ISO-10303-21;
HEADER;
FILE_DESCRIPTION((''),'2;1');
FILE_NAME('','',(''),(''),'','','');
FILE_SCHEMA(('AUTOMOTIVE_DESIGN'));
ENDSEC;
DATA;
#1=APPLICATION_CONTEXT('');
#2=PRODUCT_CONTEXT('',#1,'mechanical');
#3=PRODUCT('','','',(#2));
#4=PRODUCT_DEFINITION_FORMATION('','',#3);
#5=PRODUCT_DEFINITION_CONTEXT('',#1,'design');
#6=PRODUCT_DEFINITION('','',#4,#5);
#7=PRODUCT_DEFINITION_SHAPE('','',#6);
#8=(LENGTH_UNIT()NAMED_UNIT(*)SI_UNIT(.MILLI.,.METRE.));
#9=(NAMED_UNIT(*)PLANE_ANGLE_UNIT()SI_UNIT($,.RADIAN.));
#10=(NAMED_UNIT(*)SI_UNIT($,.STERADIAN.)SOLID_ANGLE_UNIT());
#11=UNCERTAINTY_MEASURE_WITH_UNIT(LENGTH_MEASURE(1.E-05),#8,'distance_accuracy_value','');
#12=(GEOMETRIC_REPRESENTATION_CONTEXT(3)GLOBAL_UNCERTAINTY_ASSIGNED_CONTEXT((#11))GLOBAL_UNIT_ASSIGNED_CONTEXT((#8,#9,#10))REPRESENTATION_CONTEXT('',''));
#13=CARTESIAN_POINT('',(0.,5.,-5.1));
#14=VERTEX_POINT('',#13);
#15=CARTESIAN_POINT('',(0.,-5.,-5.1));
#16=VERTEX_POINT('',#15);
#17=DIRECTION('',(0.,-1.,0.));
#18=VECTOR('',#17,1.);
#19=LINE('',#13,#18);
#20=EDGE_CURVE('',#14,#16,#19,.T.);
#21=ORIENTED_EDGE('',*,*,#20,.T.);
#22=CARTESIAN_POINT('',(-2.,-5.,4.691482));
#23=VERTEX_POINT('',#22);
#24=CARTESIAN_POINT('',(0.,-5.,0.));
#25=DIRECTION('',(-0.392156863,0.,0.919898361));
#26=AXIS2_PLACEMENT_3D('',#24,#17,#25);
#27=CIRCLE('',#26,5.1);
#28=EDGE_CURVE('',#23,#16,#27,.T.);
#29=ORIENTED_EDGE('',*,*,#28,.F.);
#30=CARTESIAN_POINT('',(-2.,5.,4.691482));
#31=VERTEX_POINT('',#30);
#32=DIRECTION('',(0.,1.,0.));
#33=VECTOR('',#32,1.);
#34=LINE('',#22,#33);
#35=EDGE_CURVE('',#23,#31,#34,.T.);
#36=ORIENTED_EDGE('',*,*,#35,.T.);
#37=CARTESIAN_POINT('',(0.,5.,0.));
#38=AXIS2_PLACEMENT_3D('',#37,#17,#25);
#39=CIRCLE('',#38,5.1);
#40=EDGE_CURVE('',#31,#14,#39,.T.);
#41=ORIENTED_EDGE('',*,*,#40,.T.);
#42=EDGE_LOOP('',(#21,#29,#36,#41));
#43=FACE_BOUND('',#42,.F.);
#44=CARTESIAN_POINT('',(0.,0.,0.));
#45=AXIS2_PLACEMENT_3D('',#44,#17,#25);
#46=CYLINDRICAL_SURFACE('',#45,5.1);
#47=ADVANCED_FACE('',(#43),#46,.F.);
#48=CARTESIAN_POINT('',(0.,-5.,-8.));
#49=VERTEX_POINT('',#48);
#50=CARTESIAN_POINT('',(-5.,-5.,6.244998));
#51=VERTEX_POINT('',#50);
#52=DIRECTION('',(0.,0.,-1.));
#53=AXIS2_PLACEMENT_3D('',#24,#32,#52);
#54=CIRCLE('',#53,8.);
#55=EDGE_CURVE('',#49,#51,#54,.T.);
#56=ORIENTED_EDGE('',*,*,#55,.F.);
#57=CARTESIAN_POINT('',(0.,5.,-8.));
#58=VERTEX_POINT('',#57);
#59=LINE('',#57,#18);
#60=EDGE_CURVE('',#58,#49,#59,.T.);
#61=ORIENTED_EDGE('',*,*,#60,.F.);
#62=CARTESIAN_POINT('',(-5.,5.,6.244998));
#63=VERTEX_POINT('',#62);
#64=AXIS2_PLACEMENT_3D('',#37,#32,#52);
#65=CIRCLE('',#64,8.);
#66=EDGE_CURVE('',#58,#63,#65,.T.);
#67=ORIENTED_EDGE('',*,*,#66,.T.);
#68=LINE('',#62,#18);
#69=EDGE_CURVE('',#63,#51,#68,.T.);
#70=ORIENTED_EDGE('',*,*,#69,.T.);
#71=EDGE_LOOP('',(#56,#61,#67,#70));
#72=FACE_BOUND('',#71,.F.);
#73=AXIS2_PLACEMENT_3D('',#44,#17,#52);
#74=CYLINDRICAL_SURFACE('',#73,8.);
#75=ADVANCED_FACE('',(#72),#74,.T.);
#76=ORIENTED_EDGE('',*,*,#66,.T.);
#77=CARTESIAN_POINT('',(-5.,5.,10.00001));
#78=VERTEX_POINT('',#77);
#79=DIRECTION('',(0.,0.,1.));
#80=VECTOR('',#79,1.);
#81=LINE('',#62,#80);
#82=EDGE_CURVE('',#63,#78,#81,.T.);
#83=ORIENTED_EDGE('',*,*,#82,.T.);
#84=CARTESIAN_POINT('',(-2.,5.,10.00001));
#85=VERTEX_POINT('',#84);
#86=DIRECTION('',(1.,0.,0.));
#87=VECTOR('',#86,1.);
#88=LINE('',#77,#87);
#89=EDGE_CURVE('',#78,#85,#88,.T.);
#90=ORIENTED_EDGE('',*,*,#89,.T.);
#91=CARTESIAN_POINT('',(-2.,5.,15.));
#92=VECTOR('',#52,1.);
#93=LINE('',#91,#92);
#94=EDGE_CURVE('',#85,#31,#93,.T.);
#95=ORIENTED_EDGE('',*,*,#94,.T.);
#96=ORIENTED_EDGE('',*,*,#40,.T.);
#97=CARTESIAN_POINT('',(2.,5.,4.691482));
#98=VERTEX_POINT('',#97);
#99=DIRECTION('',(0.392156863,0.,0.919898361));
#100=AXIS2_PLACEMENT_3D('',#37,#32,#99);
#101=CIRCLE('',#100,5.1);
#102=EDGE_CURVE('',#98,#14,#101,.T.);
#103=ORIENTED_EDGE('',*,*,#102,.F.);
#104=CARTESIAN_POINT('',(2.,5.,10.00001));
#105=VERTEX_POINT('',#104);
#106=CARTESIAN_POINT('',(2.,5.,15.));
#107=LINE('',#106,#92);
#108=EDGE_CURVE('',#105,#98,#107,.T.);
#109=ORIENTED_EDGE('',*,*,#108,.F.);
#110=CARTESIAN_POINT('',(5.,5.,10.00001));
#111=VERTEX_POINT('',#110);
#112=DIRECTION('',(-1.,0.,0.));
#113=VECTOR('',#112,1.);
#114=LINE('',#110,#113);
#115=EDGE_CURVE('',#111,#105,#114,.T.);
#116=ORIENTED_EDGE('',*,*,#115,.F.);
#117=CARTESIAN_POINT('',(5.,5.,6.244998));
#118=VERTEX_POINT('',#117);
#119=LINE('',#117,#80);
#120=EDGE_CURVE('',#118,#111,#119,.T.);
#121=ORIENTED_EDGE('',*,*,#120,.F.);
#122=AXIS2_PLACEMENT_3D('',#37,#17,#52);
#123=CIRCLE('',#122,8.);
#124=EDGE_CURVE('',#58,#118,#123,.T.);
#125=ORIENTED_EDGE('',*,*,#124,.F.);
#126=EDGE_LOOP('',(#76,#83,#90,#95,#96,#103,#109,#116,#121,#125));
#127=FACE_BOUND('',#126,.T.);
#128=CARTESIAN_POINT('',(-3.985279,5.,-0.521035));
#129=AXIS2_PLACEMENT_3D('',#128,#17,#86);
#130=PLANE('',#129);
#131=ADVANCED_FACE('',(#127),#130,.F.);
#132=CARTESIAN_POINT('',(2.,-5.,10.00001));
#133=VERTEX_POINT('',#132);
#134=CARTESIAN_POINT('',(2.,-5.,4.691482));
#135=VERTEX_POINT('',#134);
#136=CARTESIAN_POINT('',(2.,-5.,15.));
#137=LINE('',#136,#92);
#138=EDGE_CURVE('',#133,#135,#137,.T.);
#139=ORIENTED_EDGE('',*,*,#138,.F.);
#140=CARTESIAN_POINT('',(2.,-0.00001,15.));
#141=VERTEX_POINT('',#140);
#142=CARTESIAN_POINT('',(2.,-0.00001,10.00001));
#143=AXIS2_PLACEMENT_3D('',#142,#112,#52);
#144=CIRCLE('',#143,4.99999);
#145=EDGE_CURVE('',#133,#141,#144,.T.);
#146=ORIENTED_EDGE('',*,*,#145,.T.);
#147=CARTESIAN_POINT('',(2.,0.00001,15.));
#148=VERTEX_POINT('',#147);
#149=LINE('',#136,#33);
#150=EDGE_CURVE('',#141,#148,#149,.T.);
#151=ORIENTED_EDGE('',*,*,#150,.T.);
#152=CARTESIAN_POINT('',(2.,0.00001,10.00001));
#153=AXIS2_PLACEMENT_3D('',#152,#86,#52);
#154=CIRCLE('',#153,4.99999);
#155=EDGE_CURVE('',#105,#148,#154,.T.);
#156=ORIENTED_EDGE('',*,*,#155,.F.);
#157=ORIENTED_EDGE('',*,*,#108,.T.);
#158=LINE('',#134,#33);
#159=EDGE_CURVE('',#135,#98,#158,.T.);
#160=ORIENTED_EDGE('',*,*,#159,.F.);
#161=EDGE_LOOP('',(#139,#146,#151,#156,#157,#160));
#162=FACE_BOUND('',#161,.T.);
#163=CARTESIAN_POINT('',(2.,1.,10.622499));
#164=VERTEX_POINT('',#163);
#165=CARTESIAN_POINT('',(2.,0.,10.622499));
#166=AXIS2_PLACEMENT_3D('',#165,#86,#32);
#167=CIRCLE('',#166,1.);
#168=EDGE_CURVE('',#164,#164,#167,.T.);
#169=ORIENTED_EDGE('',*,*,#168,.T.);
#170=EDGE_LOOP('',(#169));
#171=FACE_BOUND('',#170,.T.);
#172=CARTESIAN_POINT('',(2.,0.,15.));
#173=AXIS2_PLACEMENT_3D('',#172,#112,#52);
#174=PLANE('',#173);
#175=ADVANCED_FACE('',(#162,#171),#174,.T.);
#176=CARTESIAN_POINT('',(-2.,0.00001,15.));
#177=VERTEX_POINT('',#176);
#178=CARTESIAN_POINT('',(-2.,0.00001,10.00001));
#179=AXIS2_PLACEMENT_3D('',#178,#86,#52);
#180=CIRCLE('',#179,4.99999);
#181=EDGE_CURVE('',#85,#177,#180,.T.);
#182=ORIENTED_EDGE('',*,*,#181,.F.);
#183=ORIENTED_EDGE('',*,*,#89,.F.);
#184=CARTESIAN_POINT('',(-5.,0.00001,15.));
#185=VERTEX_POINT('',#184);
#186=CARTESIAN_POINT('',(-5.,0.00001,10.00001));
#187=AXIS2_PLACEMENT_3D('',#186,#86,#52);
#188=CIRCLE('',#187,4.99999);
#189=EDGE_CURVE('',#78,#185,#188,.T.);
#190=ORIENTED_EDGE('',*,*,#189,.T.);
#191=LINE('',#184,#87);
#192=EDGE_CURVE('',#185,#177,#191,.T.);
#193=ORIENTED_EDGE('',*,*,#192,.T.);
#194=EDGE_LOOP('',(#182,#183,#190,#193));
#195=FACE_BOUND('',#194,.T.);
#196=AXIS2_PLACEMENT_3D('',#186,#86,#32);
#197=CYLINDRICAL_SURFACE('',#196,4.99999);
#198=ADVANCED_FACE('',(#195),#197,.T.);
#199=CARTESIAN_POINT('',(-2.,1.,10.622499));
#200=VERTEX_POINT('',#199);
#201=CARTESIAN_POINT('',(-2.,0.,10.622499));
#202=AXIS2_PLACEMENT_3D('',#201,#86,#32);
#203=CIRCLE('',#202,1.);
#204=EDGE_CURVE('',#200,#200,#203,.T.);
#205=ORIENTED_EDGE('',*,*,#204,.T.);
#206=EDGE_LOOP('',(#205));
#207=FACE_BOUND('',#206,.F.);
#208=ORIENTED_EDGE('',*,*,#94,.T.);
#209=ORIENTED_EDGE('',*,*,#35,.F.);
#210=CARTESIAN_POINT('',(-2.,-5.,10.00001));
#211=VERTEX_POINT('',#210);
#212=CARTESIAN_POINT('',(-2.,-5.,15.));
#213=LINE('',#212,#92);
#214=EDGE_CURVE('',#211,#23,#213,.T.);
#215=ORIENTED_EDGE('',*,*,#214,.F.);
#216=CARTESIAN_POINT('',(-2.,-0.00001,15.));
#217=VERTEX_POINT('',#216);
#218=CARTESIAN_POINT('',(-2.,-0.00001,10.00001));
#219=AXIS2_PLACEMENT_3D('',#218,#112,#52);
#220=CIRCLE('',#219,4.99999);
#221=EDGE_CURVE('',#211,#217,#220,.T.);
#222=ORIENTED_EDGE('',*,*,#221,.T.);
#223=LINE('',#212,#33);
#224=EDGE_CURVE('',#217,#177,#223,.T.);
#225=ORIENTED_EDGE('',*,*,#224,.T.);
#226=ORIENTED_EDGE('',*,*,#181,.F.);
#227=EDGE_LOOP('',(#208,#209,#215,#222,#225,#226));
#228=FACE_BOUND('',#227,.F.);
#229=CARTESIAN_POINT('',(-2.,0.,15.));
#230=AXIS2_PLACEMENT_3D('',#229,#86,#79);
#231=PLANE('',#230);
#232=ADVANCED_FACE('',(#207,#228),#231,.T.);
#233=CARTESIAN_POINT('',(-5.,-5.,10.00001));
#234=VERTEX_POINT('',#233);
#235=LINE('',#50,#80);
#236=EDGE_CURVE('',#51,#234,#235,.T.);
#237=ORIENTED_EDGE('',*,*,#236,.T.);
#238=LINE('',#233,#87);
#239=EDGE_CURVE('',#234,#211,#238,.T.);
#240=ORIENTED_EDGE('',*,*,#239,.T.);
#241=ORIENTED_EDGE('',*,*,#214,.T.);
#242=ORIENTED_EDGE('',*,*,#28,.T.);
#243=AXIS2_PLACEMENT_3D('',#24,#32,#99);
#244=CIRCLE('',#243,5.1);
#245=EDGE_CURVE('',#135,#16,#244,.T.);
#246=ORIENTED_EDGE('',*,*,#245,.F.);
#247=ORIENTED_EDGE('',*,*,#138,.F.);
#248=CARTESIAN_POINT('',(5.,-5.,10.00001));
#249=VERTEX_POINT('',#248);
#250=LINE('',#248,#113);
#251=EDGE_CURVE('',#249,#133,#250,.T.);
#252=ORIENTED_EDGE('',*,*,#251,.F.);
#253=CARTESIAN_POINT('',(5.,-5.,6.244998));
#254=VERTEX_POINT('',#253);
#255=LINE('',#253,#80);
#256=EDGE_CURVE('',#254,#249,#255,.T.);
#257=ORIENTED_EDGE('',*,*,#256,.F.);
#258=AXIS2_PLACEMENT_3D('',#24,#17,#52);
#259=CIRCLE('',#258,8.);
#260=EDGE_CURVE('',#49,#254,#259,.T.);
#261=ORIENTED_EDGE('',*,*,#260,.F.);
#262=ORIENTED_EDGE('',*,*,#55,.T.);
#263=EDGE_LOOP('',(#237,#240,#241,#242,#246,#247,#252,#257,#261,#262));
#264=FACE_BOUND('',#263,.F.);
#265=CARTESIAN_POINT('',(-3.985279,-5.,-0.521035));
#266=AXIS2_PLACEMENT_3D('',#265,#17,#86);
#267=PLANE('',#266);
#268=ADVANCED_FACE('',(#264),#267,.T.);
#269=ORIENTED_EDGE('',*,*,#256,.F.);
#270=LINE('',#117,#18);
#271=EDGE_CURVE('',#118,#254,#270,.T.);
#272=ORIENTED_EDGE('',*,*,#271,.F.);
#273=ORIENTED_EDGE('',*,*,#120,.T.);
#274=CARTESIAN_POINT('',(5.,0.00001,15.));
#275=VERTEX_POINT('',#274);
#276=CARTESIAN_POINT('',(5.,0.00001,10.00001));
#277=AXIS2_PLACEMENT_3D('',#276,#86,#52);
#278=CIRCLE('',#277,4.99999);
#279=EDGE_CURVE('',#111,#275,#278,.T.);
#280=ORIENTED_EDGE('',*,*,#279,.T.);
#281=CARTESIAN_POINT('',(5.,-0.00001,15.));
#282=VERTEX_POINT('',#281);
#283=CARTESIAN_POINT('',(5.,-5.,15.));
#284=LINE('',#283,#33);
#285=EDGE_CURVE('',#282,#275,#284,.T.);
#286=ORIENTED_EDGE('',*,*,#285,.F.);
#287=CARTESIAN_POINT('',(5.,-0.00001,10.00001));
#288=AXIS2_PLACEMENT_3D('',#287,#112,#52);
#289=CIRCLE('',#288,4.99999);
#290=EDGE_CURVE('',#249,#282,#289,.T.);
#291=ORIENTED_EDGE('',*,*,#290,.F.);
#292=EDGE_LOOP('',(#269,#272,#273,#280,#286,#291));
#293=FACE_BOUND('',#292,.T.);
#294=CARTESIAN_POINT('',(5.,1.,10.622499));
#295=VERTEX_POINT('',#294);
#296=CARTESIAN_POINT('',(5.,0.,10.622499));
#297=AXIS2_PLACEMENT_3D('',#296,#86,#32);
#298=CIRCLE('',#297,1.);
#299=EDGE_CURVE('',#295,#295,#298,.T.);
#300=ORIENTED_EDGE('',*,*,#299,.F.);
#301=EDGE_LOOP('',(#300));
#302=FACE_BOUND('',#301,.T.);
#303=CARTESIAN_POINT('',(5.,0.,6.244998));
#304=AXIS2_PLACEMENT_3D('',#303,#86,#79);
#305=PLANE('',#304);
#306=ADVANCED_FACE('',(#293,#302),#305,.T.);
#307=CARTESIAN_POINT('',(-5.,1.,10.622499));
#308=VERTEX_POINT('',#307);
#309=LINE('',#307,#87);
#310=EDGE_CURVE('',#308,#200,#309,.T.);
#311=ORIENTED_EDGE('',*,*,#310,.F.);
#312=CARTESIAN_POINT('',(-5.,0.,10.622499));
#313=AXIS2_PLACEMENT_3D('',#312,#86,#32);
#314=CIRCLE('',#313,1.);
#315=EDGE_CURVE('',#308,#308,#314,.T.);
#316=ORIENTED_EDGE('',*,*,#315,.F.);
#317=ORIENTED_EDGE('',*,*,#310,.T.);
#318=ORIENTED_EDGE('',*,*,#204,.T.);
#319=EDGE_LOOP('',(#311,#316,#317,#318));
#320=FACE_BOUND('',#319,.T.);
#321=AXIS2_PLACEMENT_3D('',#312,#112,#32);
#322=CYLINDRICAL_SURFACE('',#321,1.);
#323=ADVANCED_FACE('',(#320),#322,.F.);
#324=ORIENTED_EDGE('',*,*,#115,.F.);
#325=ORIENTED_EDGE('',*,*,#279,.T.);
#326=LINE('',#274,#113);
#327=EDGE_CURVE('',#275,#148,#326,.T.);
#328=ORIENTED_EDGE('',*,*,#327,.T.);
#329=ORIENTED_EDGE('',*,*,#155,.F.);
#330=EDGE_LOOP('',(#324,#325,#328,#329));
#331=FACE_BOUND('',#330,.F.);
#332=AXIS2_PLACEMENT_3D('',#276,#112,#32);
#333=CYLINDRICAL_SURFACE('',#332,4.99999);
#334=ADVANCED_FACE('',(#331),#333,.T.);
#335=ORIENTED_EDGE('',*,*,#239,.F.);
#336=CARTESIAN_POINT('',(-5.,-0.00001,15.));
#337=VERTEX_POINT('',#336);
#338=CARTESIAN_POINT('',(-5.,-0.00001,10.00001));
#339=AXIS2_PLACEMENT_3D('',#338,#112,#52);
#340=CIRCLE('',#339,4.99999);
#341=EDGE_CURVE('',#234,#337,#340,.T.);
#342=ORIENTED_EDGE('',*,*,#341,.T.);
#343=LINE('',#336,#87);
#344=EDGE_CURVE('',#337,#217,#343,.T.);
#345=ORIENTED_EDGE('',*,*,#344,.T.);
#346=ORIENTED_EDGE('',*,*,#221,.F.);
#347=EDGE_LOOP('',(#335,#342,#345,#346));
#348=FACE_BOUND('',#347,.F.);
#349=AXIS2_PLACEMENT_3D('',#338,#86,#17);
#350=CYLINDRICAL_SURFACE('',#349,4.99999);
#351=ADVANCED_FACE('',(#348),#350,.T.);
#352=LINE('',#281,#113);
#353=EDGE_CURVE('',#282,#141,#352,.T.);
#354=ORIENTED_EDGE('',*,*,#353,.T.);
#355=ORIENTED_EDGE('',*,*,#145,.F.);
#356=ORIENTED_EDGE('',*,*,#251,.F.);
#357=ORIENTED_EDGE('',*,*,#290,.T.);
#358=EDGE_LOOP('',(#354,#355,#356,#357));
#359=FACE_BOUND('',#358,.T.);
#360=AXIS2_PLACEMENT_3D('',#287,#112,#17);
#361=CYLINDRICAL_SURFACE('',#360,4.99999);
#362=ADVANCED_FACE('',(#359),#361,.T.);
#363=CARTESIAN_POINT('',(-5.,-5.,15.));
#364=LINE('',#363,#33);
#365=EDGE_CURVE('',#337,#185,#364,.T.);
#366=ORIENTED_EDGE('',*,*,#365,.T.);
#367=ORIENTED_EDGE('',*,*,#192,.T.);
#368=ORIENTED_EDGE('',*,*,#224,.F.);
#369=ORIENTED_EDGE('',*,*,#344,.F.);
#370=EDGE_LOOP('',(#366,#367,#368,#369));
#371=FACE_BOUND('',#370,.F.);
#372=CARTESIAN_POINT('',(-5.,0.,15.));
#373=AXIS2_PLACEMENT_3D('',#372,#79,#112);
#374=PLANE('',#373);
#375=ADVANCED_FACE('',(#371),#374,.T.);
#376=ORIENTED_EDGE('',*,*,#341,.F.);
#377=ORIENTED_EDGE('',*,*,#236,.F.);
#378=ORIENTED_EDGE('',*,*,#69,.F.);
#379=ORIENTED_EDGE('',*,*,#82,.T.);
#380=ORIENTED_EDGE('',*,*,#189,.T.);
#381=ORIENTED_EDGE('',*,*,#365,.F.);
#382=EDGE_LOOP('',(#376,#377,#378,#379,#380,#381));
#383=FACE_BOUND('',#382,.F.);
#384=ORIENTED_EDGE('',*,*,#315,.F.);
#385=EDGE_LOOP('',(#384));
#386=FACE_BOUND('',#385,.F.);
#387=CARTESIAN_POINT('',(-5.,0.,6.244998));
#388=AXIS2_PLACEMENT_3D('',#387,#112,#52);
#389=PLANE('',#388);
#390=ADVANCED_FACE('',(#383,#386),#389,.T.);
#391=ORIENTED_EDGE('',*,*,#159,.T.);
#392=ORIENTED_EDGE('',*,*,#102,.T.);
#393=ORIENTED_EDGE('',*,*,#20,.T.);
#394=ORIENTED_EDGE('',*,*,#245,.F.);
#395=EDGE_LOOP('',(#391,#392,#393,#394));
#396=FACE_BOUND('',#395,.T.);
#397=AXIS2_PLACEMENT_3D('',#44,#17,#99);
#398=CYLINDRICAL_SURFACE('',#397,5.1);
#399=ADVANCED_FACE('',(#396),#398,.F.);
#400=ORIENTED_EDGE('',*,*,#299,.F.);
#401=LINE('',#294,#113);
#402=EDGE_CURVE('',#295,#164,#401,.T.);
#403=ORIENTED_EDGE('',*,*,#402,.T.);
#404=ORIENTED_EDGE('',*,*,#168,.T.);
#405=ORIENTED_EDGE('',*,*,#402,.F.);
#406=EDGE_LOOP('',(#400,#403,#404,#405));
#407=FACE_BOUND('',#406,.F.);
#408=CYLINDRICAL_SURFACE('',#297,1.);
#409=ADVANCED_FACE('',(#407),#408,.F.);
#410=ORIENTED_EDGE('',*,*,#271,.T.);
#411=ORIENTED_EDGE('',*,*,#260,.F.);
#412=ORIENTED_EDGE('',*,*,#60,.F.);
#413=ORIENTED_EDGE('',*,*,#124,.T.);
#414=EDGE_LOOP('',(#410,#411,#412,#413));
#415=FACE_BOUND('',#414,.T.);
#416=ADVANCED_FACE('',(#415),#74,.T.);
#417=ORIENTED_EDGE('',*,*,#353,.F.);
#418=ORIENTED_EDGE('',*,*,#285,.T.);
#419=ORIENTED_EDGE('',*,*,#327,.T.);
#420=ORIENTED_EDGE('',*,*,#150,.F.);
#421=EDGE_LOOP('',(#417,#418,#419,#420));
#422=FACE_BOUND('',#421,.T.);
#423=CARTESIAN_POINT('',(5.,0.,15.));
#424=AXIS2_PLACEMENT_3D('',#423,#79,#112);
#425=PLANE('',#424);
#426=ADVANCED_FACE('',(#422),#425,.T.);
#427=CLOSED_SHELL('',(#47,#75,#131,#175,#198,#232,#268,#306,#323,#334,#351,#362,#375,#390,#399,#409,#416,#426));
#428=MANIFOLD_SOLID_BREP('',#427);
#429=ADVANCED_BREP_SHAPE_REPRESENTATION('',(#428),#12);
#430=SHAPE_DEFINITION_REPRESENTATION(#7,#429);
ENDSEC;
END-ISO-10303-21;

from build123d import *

# Parameters (mm, degrees)
F1_DEPTH = 5
F2_R     = 1
F3_DEPTH = 25
F4_R     = 4.99999


# Not quite as in the source:
# - a fillet or chamfer is up to 0.001 mm smaller than in the source, because OpenCascade refuses the exact size
# - a feature names something its author has since deleted; it is built from what else it names


with BuildPart() as f1:
    # F0 (on Front) → F1 (new body, symmetric)
    with BuildSketch(Plane.XZ):
        with BuildLine():
            ThreePointArc((2, 4.6914816423), (4.9968268119, -1.0206477415), (0, -5.1))
            Line((0, -5.1), (0, -8))
            ThreePointArc((0, -8), (7.5485092564, -2.6495297708), (5, 6.2449979984))
            ThreePointArc((5, 6.2449979984), (3.5795567819, 7.1544932207), (2, 7.7459666924))
            Line((2, 7.7459666924), (2, 4.6914816423))
        make_face()
        with BuildLine():
            Line((2, 15), (2, 7.7459666924))
            ThreePointArc((2, 7.7459666924), (3.5795567819, 7.1544932207), (5, 6.2449979984))
            Line((5, 6.2449979984), (5, 15))
            Line((5, 15), (2, 15))
        make_face()
    extrude(amount=F1_DEPTH, both=True)

    # F2 (on face) → F3 (cut)
    with BuildSketch(Plane.YZ.offset(5)):
        with Locations((0, 10.6224989992)):
            Circle(F2_R)
    extrude(amount=-F3_DEPTH, mode=Mode.SUBTRACT)

    # F4 (radius 5 in the source; OpenCascade refuses exactly that, so slightly less here)
    f4_edges = [f1.edges().sort_by_distance(p)[0] for p in [
        (3.5, -5, 15),
        (3.5, 5, 15),
    ]]
    fillet(f4_edges, radius=F4_R)

    # F5: F1 across plane


with BuildPart() as f1_1:
    add(f1.part)
    add(f1.part.mirror(Plane.YZ))


solid = f1_1.part
